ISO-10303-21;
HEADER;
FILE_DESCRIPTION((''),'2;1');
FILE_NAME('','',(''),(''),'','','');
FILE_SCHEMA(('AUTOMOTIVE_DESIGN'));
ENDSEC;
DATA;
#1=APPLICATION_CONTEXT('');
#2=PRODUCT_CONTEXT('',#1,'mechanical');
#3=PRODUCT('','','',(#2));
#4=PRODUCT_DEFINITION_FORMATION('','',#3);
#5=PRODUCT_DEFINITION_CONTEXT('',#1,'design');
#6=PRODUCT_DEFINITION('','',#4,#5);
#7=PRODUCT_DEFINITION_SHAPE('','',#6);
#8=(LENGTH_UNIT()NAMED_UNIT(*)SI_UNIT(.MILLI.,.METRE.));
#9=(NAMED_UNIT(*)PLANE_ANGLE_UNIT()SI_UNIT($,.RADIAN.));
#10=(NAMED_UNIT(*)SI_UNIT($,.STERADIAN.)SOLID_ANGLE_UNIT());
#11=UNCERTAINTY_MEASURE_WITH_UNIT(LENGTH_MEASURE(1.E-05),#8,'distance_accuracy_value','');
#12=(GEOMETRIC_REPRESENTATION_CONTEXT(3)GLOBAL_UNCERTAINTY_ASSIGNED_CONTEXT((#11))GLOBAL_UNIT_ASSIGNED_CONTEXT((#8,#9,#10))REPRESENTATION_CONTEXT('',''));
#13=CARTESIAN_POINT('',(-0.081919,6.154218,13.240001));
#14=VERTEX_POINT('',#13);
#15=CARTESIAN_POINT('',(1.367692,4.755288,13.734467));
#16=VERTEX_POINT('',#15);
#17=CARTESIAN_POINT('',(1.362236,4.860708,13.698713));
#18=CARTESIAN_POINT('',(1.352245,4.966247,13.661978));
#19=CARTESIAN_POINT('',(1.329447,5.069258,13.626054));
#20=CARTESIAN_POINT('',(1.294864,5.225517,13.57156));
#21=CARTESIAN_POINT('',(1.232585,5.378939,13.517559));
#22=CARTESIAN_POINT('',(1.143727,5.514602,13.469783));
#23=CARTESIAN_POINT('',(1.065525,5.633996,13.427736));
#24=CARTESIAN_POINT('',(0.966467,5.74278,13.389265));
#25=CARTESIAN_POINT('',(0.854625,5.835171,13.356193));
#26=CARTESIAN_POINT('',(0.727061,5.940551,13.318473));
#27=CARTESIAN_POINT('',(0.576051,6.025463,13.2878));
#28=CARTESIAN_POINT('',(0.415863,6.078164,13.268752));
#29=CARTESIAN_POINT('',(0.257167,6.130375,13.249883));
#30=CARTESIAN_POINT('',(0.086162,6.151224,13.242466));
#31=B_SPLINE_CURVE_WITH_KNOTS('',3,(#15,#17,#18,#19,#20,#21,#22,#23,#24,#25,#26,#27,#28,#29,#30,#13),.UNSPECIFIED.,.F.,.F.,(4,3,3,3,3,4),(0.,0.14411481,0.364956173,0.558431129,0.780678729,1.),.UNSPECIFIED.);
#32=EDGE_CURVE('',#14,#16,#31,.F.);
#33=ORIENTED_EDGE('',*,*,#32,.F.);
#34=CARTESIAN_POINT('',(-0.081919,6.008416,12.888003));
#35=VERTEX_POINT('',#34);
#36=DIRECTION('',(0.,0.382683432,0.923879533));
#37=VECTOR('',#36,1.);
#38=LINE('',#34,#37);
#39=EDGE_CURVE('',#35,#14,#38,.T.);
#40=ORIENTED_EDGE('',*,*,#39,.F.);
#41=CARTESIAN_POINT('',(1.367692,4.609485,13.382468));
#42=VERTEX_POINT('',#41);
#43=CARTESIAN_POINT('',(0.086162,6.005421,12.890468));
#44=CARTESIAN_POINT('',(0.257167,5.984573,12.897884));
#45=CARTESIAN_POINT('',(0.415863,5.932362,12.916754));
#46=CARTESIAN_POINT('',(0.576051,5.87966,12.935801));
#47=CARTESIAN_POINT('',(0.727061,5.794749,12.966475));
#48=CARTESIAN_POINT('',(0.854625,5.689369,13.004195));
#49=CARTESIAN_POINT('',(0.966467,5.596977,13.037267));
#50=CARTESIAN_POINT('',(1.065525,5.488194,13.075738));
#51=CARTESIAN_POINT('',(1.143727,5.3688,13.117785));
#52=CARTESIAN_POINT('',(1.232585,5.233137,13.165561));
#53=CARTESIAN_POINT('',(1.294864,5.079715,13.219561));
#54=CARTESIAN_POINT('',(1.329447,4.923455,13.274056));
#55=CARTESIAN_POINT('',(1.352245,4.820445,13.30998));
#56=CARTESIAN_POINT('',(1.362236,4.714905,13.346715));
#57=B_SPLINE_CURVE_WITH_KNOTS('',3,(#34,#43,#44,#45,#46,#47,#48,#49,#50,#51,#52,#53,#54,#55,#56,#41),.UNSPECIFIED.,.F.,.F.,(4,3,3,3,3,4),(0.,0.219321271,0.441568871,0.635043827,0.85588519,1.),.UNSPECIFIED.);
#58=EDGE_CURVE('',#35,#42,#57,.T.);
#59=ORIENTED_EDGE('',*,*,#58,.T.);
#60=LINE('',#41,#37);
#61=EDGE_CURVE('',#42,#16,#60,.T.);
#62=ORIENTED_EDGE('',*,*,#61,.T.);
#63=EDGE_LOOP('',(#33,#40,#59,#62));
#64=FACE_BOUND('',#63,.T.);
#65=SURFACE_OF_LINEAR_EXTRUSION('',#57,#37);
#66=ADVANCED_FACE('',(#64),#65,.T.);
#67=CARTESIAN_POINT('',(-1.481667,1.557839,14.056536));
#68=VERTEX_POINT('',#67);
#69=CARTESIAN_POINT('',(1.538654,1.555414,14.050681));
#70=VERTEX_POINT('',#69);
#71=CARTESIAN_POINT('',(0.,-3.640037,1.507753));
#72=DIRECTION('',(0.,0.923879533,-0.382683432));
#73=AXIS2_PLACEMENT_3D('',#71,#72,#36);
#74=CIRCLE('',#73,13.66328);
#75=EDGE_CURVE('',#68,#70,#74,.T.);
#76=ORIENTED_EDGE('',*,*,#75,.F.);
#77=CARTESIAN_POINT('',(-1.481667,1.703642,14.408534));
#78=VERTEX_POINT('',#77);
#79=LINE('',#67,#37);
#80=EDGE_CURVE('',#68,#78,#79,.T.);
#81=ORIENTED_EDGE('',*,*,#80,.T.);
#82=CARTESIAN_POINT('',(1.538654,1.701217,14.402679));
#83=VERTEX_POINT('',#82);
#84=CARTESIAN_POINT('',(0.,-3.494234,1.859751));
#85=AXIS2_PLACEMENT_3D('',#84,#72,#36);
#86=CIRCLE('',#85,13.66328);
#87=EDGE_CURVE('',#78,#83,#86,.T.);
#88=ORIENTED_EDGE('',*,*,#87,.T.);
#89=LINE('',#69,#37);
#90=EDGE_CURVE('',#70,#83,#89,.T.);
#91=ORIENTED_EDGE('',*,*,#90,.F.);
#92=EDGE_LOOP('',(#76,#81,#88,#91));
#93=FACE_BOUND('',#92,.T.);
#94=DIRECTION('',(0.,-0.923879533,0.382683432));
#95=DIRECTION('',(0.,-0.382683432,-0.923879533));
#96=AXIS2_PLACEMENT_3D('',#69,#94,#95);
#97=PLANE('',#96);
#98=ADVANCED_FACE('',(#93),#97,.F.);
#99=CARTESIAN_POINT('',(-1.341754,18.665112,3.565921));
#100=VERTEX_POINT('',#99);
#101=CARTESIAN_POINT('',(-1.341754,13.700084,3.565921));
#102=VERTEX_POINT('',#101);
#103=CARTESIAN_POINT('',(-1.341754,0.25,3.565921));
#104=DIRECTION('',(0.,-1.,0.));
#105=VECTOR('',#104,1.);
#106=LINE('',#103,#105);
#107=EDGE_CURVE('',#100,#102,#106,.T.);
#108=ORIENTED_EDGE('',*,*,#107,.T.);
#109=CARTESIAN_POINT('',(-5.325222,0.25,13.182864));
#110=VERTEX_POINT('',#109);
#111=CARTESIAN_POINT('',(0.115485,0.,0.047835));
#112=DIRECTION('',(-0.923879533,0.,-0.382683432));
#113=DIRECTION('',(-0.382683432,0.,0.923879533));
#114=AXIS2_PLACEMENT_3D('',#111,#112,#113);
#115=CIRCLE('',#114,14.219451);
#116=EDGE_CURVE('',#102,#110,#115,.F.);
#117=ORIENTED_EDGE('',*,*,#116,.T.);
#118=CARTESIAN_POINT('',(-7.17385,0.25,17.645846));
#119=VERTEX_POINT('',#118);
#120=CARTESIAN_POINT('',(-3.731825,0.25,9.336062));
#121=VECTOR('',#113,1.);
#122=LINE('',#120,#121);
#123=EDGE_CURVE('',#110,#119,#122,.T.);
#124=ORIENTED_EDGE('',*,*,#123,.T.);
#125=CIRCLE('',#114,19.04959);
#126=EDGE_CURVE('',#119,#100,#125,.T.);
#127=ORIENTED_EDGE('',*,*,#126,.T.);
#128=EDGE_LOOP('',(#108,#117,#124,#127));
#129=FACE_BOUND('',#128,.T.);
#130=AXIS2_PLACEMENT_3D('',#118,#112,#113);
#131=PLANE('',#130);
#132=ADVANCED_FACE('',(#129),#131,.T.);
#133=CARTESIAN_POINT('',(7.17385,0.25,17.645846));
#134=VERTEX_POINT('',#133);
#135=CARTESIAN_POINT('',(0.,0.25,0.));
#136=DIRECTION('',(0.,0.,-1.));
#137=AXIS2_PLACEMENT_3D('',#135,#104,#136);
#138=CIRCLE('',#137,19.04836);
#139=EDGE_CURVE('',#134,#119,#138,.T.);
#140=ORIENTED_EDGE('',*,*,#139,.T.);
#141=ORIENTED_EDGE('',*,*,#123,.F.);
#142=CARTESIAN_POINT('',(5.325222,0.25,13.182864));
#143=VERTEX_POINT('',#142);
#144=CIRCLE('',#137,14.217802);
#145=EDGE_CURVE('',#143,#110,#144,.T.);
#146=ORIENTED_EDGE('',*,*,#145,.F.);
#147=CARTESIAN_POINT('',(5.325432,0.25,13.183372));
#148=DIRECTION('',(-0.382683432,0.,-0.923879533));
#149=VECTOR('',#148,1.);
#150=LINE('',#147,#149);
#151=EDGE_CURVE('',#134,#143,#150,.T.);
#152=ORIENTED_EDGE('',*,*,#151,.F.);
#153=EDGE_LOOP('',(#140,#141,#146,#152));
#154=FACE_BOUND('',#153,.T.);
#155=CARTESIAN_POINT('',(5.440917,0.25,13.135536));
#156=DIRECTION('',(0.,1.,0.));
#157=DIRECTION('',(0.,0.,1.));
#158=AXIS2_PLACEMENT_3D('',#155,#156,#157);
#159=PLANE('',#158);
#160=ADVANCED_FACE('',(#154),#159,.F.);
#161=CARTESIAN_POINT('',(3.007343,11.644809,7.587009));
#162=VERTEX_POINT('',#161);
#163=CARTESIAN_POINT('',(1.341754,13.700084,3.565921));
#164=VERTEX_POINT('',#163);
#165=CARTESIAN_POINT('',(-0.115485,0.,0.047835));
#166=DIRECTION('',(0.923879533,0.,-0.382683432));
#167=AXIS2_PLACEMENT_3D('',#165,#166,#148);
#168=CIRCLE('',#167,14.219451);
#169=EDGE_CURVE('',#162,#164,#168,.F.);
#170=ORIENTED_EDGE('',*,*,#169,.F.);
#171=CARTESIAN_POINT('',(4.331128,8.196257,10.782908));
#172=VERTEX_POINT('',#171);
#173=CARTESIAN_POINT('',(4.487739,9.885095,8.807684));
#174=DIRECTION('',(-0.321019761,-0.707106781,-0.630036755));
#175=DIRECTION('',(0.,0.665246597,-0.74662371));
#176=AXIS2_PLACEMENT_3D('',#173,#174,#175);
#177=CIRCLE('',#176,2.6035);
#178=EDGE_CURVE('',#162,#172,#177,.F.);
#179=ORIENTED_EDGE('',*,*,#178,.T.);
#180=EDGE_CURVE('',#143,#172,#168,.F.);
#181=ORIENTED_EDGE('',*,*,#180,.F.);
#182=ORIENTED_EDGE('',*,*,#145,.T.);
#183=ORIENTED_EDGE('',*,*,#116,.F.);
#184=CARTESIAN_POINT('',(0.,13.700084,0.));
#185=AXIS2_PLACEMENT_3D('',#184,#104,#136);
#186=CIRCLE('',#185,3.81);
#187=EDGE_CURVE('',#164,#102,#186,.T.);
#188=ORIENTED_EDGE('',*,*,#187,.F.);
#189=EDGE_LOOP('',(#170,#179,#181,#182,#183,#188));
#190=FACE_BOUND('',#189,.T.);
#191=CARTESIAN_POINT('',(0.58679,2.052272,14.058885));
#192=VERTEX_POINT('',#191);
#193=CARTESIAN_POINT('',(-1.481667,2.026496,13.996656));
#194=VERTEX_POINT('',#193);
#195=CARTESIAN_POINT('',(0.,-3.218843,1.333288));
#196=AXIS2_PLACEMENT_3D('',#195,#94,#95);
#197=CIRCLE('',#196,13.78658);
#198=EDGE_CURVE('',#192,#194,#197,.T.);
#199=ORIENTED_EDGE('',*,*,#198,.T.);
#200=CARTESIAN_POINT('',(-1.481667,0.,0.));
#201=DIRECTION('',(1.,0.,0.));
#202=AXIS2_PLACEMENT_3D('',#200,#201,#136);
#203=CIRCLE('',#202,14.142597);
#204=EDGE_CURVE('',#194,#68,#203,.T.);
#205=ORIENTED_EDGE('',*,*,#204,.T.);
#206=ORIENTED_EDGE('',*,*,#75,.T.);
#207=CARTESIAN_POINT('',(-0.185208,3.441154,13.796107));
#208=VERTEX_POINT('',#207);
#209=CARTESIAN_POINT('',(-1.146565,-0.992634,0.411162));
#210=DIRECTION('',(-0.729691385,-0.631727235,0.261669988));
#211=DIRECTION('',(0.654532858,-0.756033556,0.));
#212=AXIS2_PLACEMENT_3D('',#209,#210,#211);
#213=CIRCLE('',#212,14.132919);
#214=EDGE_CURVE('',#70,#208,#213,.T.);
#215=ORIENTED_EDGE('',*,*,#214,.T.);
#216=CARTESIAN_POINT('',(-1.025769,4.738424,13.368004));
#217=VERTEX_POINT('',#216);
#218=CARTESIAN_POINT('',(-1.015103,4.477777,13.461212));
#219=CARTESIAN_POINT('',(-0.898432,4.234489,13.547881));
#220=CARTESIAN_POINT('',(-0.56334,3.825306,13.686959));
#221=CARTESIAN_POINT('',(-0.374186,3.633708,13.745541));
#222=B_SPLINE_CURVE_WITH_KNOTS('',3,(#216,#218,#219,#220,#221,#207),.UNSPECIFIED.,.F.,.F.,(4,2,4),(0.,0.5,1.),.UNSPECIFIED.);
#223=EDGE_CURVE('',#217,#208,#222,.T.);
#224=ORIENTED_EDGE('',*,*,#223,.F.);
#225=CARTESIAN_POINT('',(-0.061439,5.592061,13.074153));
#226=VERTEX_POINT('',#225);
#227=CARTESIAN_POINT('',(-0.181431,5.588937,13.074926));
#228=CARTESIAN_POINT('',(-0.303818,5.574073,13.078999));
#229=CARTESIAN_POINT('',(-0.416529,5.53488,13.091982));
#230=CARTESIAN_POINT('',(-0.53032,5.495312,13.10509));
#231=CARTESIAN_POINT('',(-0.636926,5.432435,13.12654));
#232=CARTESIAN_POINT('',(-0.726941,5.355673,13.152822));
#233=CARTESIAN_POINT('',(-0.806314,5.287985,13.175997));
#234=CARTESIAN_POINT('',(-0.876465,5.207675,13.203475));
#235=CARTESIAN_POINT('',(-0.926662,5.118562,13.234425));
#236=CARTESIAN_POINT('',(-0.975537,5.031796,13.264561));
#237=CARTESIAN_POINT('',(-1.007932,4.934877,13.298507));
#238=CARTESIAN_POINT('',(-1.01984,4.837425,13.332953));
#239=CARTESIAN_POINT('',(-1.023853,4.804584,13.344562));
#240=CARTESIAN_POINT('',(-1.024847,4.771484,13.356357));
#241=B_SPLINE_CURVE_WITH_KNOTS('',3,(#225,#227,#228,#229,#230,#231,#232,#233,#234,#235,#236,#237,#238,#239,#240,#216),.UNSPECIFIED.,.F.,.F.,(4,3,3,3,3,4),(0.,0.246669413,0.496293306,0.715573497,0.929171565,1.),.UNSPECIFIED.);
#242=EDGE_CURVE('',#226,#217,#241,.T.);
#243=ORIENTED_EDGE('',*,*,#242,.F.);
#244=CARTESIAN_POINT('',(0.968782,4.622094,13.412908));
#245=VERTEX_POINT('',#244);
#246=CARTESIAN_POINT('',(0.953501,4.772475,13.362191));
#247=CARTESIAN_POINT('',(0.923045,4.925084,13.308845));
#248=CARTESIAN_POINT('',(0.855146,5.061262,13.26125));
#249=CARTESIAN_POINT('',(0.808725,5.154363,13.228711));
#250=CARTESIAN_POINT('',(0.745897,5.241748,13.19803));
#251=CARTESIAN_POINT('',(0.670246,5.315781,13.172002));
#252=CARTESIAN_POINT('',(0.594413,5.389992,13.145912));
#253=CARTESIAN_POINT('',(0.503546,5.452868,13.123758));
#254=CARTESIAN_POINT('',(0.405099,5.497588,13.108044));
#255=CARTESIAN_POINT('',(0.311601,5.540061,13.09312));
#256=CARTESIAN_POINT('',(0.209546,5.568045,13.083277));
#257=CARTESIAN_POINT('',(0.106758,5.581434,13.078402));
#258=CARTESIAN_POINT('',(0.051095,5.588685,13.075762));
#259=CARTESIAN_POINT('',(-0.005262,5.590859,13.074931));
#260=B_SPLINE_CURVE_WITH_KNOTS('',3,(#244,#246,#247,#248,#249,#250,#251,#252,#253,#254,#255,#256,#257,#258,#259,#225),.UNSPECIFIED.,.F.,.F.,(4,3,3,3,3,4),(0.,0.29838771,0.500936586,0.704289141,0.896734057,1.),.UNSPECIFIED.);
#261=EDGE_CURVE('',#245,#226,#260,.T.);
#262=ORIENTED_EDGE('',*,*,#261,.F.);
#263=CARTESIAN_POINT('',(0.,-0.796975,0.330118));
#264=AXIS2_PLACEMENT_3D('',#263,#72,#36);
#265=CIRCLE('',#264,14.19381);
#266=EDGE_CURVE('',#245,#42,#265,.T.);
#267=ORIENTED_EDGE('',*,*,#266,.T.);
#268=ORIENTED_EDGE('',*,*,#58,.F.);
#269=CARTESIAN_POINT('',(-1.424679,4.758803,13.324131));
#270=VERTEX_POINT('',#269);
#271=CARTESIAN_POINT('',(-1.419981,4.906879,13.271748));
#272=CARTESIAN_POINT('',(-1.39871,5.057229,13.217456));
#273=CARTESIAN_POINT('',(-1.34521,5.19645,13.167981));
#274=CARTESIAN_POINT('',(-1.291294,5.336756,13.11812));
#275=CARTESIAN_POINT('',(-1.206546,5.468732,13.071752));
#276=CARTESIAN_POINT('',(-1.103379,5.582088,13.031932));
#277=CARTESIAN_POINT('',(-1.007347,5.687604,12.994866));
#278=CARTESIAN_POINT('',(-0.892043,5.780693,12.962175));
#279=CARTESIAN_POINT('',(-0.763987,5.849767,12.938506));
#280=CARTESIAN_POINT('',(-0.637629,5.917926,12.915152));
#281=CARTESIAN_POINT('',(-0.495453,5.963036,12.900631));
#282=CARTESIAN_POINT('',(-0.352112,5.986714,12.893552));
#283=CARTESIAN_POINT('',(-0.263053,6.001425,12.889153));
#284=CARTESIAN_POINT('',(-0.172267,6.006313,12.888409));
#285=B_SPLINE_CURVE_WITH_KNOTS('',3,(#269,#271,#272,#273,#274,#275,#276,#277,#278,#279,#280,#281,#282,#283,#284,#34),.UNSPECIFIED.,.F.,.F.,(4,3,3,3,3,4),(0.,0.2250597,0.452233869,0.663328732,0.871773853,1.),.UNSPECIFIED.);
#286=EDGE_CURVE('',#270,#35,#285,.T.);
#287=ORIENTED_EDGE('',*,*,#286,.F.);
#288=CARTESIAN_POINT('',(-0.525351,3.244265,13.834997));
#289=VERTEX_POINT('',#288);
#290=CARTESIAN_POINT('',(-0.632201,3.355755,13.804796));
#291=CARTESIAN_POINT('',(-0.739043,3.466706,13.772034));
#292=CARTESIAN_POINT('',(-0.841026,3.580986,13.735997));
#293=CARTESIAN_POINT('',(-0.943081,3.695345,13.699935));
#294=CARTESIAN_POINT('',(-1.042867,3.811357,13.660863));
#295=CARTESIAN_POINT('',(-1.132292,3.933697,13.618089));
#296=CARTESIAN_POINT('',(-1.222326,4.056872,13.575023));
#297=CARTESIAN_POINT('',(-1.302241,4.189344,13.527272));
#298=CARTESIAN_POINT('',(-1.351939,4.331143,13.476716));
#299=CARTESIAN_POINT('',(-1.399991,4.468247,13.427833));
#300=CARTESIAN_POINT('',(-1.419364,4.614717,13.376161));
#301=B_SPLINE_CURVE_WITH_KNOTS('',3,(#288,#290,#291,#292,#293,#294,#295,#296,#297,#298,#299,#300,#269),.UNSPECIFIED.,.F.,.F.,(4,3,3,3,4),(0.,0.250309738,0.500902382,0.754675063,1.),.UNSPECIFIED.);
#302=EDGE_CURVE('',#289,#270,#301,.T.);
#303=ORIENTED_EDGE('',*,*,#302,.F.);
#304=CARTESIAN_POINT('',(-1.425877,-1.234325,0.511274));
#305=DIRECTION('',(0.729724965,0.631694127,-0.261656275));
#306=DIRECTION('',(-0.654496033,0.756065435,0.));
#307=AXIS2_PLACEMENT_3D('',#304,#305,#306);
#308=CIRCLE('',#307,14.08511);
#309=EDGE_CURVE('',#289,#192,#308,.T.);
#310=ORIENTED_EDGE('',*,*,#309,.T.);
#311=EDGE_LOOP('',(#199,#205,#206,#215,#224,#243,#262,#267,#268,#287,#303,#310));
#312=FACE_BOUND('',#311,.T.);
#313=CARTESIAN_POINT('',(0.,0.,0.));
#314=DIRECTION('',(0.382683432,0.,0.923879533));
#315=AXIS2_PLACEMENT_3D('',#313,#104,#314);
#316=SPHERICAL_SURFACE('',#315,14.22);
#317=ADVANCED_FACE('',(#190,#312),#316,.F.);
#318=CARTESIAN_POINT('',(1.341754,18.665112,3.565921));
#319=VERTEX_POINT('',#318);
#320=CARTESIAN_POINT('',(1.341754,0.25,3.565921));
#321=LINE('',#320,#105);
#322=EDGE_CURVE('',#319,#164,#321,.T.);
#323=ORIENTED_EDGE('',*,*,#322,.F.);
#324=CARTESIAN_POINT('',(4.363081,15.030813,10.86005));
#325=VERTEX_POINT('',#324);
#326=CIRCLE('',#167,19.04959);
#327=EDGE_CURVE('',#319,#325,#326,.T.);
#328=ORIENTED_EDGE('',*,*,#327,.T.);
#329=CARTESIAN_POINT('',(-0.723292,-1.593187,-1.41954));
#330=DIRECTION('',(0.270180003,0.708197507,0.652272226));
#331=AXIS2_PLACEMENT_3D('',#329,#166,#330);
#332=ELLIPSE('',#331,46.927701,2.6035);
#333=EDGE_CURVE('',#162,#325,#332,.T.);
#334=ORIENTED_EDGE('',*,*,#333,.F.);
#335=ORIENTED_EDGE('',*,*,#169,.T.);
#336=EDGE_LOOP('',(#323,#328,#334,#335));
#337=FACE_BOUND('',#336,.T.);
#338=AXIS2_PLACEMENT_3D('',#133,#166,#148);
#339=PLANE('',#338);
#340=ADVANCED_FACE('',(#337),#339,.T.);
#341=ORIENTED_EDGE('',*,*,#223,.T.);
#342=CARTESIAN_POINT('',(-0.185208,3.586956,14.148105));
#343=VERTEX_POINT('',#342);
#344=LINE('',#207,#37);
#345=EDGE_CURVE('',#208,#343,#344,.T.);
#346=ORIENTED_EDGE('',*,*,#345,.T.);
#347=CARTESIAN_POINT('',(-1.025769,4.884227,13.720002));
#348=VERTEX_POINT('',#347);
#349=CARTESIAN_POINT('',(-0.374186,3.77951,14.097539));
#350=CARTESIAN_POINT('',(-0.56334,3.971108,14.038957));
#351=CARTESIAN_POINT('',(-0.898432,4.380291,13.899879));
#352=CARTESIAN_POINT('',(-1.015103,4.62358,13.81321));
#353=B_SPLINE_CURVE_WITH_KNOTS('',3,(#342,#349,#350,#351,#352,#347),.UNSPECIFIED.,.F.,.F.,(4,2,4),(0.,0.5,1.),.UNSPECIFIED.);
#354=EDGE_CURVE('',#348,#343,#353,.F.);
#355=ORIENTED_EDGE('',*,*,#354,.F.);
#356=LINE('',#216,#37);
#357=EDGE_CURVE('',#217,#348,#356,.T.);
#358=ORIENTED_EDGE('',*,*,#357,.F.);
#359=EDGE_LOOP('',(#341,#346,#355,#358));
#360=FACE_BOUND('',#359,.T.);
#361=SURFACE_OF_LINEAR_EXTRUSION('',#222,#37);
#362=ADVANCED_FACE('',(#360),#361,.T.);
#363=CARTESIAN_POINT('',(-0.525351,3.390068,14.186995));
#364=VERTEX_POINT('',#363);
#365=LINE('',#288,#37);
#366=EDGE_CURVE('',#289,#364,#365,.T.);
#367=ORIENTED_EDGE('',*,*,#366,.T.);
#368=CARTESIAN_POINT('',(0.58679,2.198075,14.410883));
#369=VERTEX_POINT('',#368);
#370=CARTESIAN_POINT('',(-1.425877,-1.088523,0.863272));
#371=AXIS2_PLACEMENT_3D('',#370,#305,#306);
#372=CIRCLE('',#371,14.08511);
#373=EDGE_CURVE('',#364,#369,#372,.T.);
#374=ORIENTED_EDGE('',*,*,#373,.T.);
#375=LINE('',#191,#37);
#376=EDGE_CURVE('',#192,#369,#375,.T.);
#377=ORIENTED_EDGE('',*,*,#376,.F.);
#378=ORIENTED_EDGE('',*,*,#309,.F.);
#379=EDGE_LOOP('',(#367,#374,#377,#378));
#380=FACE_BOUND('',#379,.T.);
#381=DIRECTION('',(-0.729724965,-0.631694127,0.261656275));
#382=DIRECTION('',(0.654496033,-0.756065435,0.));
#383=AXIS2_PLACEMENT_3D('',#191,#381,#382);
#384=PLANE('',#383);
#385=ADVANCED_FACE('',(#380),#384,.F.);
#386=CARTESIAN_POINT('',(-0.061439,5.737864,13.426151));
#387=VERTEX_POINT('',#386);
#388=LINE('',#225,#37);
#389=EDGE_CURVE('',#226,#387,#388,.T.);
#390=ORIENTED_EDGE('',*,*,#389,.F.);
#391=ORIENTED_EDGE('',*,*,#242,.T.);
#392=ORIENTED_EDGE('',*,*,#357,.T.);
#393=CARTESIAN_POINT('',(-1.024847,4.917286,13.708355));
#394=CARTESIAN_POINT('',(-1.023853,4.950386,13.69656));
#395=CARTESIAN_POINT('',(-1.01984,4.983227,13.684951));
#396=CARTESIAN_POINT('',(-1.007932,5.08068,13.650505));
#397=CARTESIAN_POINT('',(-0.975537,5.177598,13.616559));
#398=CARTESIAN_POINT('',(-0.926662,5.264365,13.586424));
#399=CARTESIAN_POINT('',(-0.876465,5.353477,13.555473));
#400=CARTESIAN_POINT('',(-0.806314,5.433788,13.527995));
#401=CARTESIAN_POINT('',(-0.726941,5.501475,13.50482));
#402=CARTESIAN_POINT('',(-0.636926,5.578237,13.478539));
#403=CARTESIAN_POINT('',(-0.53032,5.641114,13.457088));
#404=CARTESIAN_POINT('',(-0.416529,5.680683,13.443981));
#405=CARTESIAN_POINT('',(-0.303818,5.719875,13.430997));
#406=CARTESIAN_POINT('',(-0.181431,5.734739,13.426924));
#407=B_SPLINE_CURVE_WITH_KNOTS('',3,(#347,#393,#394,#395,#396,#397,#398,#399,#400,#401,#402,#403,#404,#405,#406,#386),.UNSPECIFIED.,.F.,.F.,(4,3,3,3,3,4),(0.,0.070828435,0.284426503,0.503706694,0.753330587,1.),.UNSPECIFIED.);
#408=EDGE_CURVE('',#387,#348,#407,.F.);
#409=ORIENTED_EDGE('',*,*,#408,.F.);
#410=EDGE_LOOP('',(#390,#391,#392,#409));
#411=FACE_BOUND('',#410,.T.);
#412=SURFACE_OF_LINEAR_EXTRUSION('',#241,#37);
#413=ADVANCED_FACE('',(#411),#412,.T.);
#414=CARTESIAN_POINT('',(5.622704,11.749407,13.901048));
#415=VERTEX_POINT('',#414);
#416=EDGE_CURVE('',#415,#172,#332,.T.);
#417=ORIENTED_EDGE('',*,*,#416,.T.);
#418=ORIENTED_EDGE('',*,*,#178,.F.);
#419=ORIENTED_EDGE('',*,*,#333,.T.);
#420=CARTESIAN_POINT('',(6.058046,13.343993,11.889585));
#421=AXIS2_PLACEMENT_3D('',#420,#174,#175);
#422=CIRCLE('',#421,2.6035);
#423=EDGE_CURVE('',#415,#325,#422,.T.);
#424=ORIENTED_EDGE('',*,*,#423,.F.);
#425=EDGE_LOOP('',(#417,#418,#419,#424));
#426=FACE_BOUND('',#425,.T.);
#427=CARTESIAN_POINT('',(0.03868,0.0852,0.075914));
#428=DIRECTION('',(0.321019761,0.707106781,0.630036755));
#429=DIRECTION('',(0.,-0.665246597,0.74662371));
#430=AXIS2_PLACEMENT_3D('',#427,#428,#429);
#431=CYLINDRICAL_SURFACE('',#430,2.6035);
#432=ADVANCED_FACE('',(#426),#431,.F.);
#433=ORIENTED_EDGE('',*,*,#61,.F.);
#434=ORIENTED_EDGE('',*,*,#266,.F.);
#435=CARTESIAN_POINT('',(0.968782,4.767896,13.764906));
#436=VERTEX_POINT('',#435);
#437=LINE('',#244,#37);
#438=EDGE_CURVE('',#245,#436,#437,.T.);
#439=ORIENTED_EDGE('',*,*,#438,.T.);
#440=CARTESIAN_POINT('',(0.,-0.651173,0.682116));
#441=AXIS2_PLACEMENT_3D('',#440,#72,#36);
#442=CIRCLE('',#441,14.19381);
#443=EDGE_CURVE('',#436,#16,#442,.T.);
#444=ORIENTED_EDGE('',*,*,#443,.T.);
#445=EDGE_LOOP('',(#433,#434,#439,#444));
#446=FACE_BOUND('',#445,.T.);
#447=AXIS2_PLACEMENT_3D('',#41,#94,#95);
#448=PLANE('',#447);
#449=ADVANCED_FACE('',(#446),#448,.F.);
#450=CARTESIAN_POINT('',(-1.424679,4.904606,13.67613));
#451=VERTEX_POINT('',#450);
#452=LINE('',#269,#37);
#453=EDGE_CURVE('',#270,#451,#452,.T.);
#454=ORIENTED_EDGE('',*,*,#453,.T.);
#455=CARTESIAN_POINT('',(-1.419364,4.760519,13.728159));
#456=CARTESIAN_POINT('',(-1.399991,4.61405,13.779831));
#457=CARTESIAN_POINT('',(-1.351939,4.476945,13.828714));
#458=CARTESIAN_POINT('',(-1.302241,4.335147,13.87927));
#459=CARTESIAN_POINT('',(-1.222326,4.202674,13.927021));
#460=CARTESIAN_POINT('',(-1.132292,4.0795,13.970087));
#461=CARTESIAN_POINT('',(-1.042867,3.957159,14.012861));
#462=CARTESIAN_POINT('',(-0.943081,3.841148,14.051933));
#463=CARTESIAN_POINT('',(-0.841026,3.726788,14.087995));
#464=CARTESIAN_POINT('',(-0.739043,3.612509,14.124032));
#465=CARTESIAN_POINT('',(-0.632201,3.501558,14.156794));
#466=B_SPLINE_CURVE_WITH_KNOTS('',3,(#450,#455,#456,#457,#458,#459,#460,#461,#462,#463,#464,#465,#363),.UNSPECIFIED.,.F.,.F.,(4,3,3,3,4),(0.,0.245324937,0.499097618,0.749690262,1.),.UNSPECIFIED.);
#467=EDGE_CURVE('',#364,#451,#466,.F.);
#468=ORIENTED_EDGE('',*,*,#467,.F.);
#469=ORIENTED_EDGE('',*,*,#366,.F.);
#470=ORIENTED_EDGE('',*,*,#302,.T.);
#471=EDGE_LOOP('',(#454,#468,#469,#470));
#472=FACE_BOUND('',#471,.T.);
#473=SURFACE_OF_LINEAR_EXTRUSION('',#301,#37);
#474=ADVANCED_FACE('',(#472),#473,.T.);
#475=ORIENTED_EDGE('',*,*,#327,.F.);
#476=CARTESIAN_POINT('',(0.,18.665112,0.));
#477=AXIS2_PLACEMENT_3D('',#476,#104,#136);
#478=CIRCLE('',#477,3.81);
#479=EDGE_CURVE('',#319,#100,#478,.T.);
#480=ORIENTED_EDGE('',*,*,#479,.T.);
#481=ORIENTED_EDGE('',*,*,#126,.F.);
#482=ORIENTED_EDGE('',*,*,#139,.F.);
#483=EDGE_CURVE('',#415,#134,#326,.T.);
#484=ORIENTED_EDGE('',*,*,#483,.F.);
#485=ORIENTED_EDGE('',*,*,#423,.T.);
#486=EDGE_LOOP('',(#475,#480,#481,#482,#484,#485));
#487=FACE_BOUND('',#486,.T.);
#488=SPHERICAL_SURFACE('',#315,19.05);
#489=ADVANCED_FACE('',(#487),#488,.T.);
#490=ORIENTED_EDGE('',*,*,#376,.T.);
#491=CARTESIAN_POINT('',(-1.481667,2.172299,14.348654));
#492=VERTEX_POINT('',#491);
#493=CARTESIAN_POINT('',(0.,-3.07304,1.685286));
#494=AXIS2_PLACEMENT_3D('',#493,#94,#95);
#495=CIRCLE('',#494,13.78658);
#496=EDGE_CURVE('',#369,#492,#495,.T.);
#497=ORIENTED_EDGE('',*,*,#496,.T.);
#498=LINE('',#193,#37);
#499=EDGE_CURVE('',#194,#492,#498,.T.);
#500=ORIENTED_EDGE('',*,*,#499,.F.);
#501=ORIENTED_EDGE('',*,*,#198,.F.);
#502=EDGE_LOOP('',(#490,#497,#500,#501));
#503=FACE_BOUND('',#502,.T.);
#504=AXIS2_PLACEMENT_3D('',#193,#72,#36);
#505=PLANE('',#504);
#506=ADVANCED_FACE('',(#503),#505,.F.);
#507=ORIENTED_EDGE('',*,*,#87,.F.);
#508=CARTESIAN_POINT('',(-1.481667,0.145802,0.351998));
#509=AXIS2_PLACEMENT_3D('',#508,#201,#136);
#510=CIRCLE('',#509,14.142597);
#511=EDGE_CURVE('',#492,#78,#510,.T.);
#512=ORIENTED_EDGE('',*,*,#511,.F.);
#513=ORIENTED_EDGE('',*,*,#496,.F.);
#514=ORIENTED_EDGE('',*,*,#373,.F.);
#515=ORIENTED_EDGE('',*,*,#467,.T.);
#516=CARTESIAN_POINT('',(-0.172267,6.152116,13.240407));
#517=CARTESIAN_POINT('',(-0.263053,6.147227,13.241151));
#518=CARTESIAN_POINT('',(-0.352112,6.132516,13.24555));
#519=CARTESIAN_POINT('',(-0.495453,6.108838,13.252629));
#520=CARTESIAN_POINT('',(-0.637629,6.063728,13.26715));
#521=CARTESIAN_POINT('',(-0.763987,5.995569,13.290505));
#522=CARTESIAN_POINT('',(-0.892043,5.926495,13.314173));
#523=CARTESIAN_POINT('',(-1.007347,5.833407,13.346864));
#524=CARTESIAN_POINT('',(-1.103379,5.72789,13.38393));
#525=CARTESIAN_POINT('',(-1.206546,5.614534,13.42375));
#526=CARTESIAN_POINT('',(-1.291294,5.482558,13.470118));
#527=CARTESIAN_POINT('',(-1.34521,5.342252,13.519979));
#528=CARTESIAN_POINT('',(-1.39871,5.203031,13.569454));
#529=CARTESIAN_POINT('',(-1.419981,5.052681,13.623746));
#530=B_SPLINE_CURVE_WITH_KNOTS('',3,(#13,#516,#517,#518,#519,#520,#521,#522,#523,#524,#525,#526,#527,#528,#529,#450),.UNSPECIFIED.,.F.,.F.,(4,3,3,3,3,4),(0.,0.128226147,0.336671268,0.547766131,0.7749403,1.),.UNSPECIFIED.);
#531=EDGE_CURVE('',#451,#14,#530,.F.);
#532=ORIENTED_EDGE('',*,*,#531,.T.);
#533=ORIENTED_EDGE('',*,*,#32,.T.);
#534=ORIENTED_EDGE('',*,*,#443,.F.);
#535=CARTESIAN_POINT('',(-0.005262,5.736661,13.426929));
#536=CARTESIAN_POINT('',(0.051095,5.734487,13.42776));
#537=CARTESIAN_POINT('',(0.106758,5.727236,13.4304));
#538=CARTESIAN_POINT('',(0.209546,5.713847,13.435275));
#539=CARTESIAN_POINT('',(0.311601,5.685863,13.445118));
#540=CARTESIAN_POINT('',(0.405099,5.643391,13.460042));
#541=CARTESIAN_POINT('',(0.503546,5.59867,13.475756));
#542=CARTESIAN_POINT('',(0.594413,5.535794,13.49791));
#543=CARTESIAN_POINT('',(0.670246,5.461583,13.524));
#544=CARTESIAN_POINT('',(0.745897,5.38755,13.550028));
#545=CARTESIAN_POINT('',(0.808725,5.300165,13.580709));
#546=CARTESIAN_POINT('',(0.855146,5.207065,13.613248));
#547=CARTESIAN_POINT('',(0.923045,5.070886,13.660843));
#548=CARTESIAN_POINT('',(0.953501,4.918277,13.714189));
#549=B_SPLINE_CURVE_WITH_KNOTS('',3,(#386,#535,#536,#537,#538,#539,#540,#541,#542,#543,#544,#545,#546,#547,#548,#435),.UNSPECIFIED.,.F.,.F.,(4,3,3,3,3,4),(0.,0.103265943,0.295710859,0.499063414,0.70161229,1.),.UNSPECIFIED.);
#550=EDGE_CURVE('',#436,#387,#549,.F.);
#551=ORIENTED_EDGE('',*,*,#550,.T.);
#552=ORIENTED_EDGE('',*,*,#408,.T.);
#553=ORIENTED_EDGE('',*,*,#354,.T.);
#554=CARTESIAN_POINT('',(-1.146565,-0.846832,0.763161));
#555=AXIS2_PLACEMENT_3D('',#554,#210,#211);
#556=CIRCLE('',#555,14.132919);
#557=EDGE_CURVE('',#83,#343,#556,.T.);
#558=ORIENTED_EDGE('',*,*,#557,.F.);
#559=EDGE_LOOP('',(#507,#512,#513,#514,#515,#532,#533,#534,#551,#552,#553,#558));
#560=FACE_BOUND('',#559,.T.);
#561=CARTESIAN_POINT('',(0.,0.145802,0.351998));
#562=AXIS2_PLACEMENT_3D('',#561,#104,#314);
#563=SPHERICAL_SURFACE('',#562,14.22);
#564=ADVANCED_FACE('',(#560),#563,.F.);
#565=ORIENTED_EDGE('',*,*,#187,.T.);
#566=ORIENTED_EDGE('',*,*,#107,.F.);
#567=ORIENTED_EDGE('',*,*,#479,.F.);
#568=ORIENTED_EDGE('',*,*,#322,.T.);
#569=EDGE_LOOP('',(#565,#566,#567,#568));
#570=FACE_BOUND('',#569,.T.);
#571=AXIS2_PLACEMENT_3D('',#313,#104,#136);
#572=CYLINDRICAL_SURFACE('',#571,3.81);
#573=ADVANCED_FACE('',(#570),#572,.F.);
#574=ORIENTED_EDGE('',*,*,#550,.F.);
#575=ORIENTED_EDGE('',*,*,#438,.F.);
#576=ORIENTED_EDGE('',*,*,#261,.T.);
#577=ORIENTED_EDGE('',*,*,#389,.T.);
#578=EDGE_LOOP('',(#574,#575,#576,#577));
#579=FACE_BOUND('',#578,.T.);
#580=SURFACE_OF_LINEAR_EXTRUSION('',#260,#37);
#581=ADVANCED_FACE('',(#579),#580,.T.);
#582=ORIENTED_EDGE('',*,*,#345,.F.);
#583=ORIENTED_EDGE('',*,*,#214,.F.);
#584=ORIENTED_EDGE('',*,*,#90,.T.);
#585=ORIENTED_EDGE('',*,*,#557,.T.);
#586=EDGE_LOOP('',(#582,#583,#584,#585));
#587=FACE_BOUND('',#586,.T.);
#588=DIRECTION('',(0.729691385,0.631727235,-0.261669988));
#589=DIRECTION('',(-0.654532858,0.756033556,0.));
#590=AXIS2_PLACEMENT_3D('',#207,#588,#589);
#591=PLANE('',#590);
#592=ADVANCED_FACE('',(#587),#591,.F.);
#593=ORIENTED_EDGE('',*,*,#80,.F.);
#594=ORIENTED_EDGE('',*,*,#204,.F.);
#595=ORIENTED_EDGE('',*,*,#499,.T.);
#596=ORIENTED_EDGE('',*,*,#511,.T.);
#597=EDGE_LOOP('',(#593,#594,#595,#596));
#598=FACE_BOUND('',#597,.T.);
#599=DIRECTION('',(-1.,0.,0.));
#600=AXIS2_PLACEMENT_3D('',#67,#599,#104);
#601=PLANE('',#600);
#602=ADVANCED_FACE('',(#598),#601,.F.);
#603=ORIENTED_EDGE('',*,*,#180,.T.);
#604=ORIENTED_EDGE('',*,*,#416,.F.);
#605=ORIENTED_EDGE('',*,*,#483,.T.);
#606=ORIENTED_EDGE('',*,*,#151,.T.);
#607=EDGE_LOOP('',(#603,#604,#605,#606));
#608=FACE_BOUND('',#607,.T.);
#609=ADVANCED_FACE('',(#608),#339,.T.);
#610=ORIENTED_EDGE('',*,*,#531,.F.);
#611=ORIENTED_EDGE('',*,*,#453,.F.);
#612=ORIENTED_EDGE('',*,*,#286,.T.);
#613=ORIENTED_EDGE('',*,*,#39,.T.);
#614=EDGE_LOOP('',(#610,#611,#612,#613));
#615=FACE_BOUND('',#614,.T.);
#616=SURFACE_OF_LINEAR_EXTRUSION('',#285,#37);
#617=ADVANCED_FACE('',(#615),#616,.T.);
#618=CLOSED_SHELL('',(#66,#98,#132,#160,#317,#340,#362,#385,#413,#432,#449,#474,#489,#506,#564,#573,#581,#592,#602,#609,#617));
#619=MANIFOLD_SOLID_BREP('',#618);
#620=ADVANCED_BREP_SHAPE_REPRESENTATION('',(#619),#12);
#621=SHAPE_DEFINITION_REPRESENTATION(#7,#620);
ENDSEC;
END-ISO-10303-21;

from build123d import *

# Parameters (mm, degrees)
REVOLVE1_ANGLE          = 45
CUT_EXTRUDE1_DEPTH      = 28.647117169
CUT_EXTRUDE1_DEPTH_BACK = 28.647117169
CUT_EXTRUDE4_START      = 13.576367639
CUT_EXTRUDE4_DEPTH      = 0.380999994
CUT_EXTRUDE4_START_2    = 13.957367633
CUT_EXTRUDE4_2_DEPTH    = 0.642564002
CUT_EXTRUDE5_DEPTH      = 28.732730484
CUT_EXTRUDE5_DEPTH_BACK = 28.732730484
SKETCH9_R               = 2.6035


with BuildPart() as part:
    # Sketch1 → Revolve1 (revolve, symmetric)
    with BuildSketch(Plane(origin=(0, 0, 0), x_dir=(0, 0, -1), z_dir=(1, 0, 0))) as revolve1_sk:
        with BuildLine():
            Line((-14.217802221, 0.25), (-19.048359509, 0.25))
            ThreePointArc((-19.048359509, 0.25), (-14.676690222, 12.144845166), (-3.81, 18.66511184))
            Line((-3.81, 18.66511184), (-3.81, 13.700083941))
            ThreePointArc((-3.81, 13.700083941), (-11.246181696, 8.70240181), (-14.217802221, 0.25))
        make_face()
    revolve(axis=Axis((0, 0, 0), (0, 1, 0)), revolution_arc=REVOLVE1_ANGLE / 2)
    revolve(revolve1_sk.sketch, axis=Axis((0, 0, 0), (0, -1, 0)), revolution_arc=REVOLVE1_ANGLE / 2)

    # Sketch2 → Cut-Extrude1 (cut, two sides: drawn at the far end of the back side and taken through both)
    with BuildSketch(Plane(origin=(0, 0, 0), x_dir=(1, 0, 0), z_dir=(0, 1, 0)).offset(-CUT_EXTRUDE1_DEPTH_BACK)):
        with BuildLine():
            Line((7.289491598, -17.598389479), (1.458023877, -3.519981019))
            ThreePointArc((1.458023877, -3.519981019), (1.400077392, -3.543428184), (1.341754023, -3.5659215))
            Line((1.341754023, -3.5659215), (7.173849701, -17.645845983))
            ThreePointArc((7.173849701, -17.645845983), (7.231709577, -17.622212591), (7.289491598, -17.598389479))
        make_face()
        with BuildLine():
            Line((-7.173849701, -17.645845983), (-1.341754023, -3.5659215))
            ThreePointArc((-1.341754023, -3.5659215), (-1.400077392, -3.543428184), (-1.458023877, -3.519981019))
            Line((-1.458023877, -3.519981019), (-7.289491598, -17.598389479))
            ThreePointArc((-7.289491598, -17.598389479), (-7.231709577, -17.622212591), (-7.173849701, -17.645845983))
        make_face()
    extrude(amount=CUT_EXTRUDE1_DEPTH + CUT_EXTRUDE1_DEPTH_BACK, mode=Mode.SUBTRACT)

    # Cut-Extrude4: read off the stored shape, not the designer's step
    # Cut-Extrude4 outline → Cut-Extrude4 (cut)
    with BuildSketch(Plane(origin=(0, 0, 0), x_dir=(-1, 0, 0), z_dir=(0, 0.3826834323650899, 0.9238795325112868)).offset(CUT_EXTRUDE4_START)):
        with BuildLine():
            add(Edge.make_bspline(
                [(-0.968782051, 0.862639779), (-0.953500776, 0.704297035), (-0.923044848, 0.542890698), (-0.855145508, 0.398864139), (-0.808724978, 0.30039795), (-0.745897012, 0.207923685), (-0.670245705, 0.129565817), (-0.594412641, 0.051019689), (-0.503545716, -0.015548318), (-0.405099082, -0.062878158), (-0.311601318, -0.107828748), (-0.209546118, -0.137449131), (-0.106757843, -0.151684794), (-0.05109477, -0.159393852), (0.005262189, -0.1617206), (0.061439303, -0.163129452)],
                knots=[0, 0, 0, 0, 0.29838771, 0.29838771, 0.29838771, 0.500936586, 0.500936586, 0.500936586, 0.704289141, 0.704289141, 0.704289141, 0.896734057, 0.896734057, 0.896734057, 1, 1, 1, 1], degree=3))
            Line((-0.968782051, 0.862639779), (-1.367692308, 0.862639779))
            add(Edge.make_bspline(
                [(0.081919071, -0.619026887), (-0.086162496, -0.61531723), (-0.257167265, -0.593217389), (-0.415863302, -0.537759882), (-0.576051263, -0.481781012), (-0.72706091, -0.391594396), (-0.854625463, -0.279801274), (-0.966467496, -0.181786819), (-1.065524634, -0.066561713), (-1.143726934, 0.059834888), (-1.232584949, 0.203454079), (-1.294864437, 0.365862515), (-1.329447249, 0.531081722), (-1.352245152, 0.639998589), (-1.362236386, 0.751562149), (-1.367692308, 0.862639779)],
                knots=[0, 0, 0, 0, 0.219321271, 0.219321271, 0.219321271, 0.441568871, 0.441568871, 0.441568871, 0.635043827, 0.635043827, 0.635043827, 0.85588519, 0.85588519, 0.85588519, 1, 1, 1, 1], degree=3))
            add(Edge.make_bspline(
                [(1.424679487, 0.702363337), (1.419981236, 0.545512864), (1.398709626, 0.385831481), (1.345210286, 0.238274474), (1.291294192, 0.089568013), (1.206545942, -0.050106462), (1.103378814, -0.170072469), (1.007347044, -0.281741256), (0.89204272, -0.380253902), (0.763987364, -0.453127945), (0.63762939, -0.525036038), (0.495452933, -0.572269115), (0.352111836, -0.596853545), (0.263052547, -0.612128103), (0.172266933, -0.616929095), (0.081919071, -0.619026887)],
                knots=[0, 0, 0, 0, 0.2250597, 0.2250597, 0.2250597, 0.452233869, 0.452233869, 0.452233869, 0.663328732, 0.663328732, 0.663328732, 0.871773853, 0.871773853, 0.871773853, 1, 1, 1, 1], degree=3))
            add(Edge.make_bspline(
                [(0.525350561, 2.297113938), (0.632201272, 2.182552925), (0.739042665, 2.067510357), (0.841026473, 1.948138788), (0.943081147, 1.828684271), (1.042867018, 1.706551704), (1.132291654, 1.577154573), (1.222325588, 1.446875791), (1.302241046, 1.306213708), (1.351938808, 1.155861709), (1.399991449, 1.01048674), (1.419363896, 0.85539296), (1.424679487, 0.702363337)],
                knots=[0, 0, 0, 0, 0.250309738, 0.250309738, 0.250309738, 0.500902382, 0.500902382, 0.500902382, 0.754675063, 0.754675063, 0.754675063, 1, 1, 1, 1], degree=3))
            Line((0.525350561, 2.297113938), (-0.586789864, 3.484050036))
            Line((-0.586789864, 3.484050036), (1.481666667, 3.484050036))
            Line((1.481666667, 3.484050036), (1.481666667, 3.939947472))
            Line((1.481666667, 3.939947472), (-1.538653846, 3.939947472))
            Line((-1.538653846, 3.939947472), (0.185208333, 2.100330084))
            add(Edge.make_bspline(
                [(1.025769231, 0.737980324), (1.015103197, 1.014455984), (0.898431748, 1.272392114), (0.563340129, 1.703651021), (0.374186439, 1.903082751), (0.185208333, 2.100330084)],
                knots=[0, 0, 0, 0, 0.5, 0.5, 1, 1, 1, 1], degree=3))
            add(Edge.make_bspline(
                [(0.061439303, -0.163129452), (0.181431455, -0.159946897), (0.303817751, -0.144655767), (0.416529018, -0.103477757), (0.530319754, -0.061905373), (0.636925683, 0.00439439), (0.726940524, 0.085370693), (0.806313998, 0.156774146), (0.876464564, 0.241486679), (0.926661814, 0.335660386), (0.975537276, 0.427354324), (1.007932207, 0.529885904), (1.019839954, 0.633102375), (1.023852868, 0.667886351), (1.024847174, 0.702980304), (1.025769231, 0.737980324)],
                knots=[0, 0, 0, 0, 0.246669413, 0.246669413, 0.246669413, 0.496293306, 0.496293306, 0.496293306, 0.715573497, 0.715573497, 0.715573497, 0.929171565, 0.929171565, 0.929171565, 1, 1, 1, 1], degree=3))
        make_face()
    extrude(amount=CUT_EXTRUDE4_DEPTH, mode=Mode.SUBTRACT)

    # Cut-Extrude4 2 outline → Cut-Extrude4 2 (cut)
    with BuildSketch(Plane(origin=(0, 0, 0), x_dir=(1, 0, 0), z_dir=(0, 0.38268343236508995, 0.9238795325112867)).offset(CUT_EXTRUDE4_START_2)):
        with BuildLine():
            add(Edge.make_bspline(
                [(0.968782051, -0.862639779), (0.953500776, -0.704297035), (0.923044848, -0.542890698), (0.855145508, -0.398864139), (0.808724978, -0.30039795), (0.745897012, -0.207923685), (0.670245705, -0.129565817), (0.594412641, -0.051019689), (0.503545716, 0.015548318), (0.405099082, 0.062878158), (0.311601318, 0.107828748), (0.209546118, 0.137449131), (0.106757843, 0.151684794), (0.05109477, 0.159393852), (-0.005262189, 0.1617206), (-0.061439303, 0.163129452)],
                knots=[0, 0, 0, 0, 0.29838771, 0.29838771, 0.29838771, 0.500936586, 0.500936586, 0.500936586, 0.704289141, 0.704289141, 0.704289141, 0.896734057, 0.896734057, 0.896734057, 1, 1, 1, 1], degree=3))
            Line((0.968782051, -0.862639779), (1.367692308, -0.862639779))
            add(Edge.make_bspline(
                [(-0.081919071, 0.619026887), (0.086162496, 0.61531723), (0.257167265, 0.593217389), (0.415863302, 0.537759882), (0.576051263, 0.481781012), (0.72706091, 0.391594396), (0.854625463, 0.279801274), (0.966467496, 0.181786819), (1.065524634, 0.066561713), (1.143726934, -0.059834888), (1.232584949, -0.203454079), (1.294864437, -0.365862515), (1.329447249, -0.531081722), (1.352245152, -0.639998589), (1.362236386, -0.751562149), (1.367692308, -0.862639779)],
                knots=[0, 0, 0, 0, 0.219321271, 0.219321271, 0.219321271, 0.441568871, 0.441568871, 0.441568871, 0.635043827, 0.635043827, 0.635043827, 0.85588519, 0.85588519, 0.85588519, 1, 1, 1, 1], degree=3))
            add(Edge.make_bspline(
                [(-1.424679487, -0.702363337), (-1.419981236, -0.545512864), (-1.398709626, -0.385831481), (-1.345210286, -0.238274474), (-1.291294192, -0.089568013), (-1.206545942, 0.050106462), (-1.103378814, 0.170072469), (-1.007347044, 0.281741256), (-0.89204272, 0.380253902), (-0.763987364, 0.453127945), (-0.63762939, 0.525036038), (-0.495452933, 0.572269115), (-0.352111836, 0.596853545), (-0.263052547, 0.612128103), (-0.172266933, 0.616929095), (-0.081919071, 0.619026887)],
                knots=[0, 0, 0, 0, 0.2250597, 0.2250597, 0.2250597, 0.452233869, 0.452233869, 0.452233869, 0.663328732, 0.663328732, 0.663328732, 0.871773853, 0.871773853, 0.871773853, 1, 1, 1, 1], degree=3))
            add(Edge.make_bspline(
                [(-0.525350561, -2.297113938), (-0.632201272, -2.182552925), (-0.739042665, -2.067510357), (-0.841026473, -1.948138788), (-0.943081147, -1.828684271), (-1.042867018, -1.706551704), (-1.132291654, -1.577154573), (-1.222325588, -1.446875791), (-1.302241046, -1.306213708), (-1.351938808, -1.155861709), (-1.399991449, -1.01048674), (-1.419363896, -0.85539296), (-1.424679487, -0.702363337)],
                knots=[0, 0, 0, 0, 0.250309738, 0.250309738, 0.250309738, 0.500902382, 0.500902382, 0.500902382, 0.754675063, 0.754675063, 0.754675063, 1, 1, 1, 1], degree=3))
            Line((-0.525350561, -2.297113938), (0.586789864, -3.484050036))
            Line((0.586789864, -3.484050036), (-1.481666667, -3.484050036))
            Line((-1.481666667, -3.484050036), (-1.481666667, -3.939947472))
            Line((-1.481666667, -3.939947472), (1.538653846, -3.939947472))
            Line((1.538653846, -3.939947472), (-0.185208333, -2.100330084))
            add(Edge.make_bspline(
                [(-1.025769231, -0.737980324), (-1.015103197, -1.014455984), (-0.898431748, -1.272392114), (-0.563340129, -1.703651021), (-0.374186439, -1.903082751), (-0.185208333, -2.100330084)],
                knots=[0, 0, 0, 0, 0.5, 0.5, 1, 1, 1, 1], degree=3))
            add(Edge.make_bspline(
                [(-0.061439303, 0.163129452), (-0.181431455, 0.159946897), (-0.303817751, 0.144655767), (-0.416529018, 0.103477757), (-0.530319754, 0.061905373), (-0.636925683, -0.00439439), (-0.726940524, -0.085370693), (-0.806313998, -0.156774146), (-0.876464564, -0.241486679), (-0.926661814, -0.335660386), (-0.975537276, -0.427354324), (-1.007932207, -0.529885904), (-1.019839954, -0.633102375), (-1.023852868, -0.667886351), (-1.024847174, -0.702980304), (-1.025769231, -0.737980324)],
                knots=[0, 0, 0, 0, 0.246669413, 0.246669413, 0.246669413, 0.496293306, 0.496293306, 0.496293306, 0.715573497, 0.715573497, 0.715573497, 0.929171565, 0.929171565, 0.929171565, 1, 1, 1, 1], degree=3))
        make_face()
    extrude(amount=CUT_EXTRUDE4_2_DEPTH, mode=Mode.SUBTRACT)

    # Cut-Extrude4 3 outline → Cut-Extrude4 3 (revolve)
    with BuildSketch(Plane(origin=(0, 0, 0), x_dir=(1, 0, 0), z_dir=(0, -0.9238795325112867, 0.38268343236508995))):
        with BuildLine():
            ThreePointArc((0.174307658, 14.599931635), (2.22533499, 14.425795626), (4.229733075, 13.957367633))
            Line((4.229733075, 13.957367633), (4.229733075, 14.599931635))
            Line((4.229733075, 14.599931635), (0.174307658, 14.599931635))
        make_face()
    revolve(axis=Axis((0, 0, 0), (0, 0.38268343236508995, 0.9238795325112867)))

    # Sketch9 → Cut-Extrude5 (cut, two sides: drawn at the far end of the back side and taken through both)
    with BuildSketch(Plane(origin=(8.561597025, 18.858537854, 16.803080265), x_dir=(0.9470724962077209, -0.23968096505674558, -0.2135573035893259), z_dir=(0.32101976096009477, 0.7071067811865476, 0.6300367553350547)).offset(-CUT_EXTRUDE5_DEPTH_BACK)):
        Circle(SKETCH9_R)
    extrude(amount=CUT_EXTRUDE5_DEPTH + CUT_EXTRUDE5_DEPTH_BACK, mode=Mode.SUBTRACT)


solid = part.part
